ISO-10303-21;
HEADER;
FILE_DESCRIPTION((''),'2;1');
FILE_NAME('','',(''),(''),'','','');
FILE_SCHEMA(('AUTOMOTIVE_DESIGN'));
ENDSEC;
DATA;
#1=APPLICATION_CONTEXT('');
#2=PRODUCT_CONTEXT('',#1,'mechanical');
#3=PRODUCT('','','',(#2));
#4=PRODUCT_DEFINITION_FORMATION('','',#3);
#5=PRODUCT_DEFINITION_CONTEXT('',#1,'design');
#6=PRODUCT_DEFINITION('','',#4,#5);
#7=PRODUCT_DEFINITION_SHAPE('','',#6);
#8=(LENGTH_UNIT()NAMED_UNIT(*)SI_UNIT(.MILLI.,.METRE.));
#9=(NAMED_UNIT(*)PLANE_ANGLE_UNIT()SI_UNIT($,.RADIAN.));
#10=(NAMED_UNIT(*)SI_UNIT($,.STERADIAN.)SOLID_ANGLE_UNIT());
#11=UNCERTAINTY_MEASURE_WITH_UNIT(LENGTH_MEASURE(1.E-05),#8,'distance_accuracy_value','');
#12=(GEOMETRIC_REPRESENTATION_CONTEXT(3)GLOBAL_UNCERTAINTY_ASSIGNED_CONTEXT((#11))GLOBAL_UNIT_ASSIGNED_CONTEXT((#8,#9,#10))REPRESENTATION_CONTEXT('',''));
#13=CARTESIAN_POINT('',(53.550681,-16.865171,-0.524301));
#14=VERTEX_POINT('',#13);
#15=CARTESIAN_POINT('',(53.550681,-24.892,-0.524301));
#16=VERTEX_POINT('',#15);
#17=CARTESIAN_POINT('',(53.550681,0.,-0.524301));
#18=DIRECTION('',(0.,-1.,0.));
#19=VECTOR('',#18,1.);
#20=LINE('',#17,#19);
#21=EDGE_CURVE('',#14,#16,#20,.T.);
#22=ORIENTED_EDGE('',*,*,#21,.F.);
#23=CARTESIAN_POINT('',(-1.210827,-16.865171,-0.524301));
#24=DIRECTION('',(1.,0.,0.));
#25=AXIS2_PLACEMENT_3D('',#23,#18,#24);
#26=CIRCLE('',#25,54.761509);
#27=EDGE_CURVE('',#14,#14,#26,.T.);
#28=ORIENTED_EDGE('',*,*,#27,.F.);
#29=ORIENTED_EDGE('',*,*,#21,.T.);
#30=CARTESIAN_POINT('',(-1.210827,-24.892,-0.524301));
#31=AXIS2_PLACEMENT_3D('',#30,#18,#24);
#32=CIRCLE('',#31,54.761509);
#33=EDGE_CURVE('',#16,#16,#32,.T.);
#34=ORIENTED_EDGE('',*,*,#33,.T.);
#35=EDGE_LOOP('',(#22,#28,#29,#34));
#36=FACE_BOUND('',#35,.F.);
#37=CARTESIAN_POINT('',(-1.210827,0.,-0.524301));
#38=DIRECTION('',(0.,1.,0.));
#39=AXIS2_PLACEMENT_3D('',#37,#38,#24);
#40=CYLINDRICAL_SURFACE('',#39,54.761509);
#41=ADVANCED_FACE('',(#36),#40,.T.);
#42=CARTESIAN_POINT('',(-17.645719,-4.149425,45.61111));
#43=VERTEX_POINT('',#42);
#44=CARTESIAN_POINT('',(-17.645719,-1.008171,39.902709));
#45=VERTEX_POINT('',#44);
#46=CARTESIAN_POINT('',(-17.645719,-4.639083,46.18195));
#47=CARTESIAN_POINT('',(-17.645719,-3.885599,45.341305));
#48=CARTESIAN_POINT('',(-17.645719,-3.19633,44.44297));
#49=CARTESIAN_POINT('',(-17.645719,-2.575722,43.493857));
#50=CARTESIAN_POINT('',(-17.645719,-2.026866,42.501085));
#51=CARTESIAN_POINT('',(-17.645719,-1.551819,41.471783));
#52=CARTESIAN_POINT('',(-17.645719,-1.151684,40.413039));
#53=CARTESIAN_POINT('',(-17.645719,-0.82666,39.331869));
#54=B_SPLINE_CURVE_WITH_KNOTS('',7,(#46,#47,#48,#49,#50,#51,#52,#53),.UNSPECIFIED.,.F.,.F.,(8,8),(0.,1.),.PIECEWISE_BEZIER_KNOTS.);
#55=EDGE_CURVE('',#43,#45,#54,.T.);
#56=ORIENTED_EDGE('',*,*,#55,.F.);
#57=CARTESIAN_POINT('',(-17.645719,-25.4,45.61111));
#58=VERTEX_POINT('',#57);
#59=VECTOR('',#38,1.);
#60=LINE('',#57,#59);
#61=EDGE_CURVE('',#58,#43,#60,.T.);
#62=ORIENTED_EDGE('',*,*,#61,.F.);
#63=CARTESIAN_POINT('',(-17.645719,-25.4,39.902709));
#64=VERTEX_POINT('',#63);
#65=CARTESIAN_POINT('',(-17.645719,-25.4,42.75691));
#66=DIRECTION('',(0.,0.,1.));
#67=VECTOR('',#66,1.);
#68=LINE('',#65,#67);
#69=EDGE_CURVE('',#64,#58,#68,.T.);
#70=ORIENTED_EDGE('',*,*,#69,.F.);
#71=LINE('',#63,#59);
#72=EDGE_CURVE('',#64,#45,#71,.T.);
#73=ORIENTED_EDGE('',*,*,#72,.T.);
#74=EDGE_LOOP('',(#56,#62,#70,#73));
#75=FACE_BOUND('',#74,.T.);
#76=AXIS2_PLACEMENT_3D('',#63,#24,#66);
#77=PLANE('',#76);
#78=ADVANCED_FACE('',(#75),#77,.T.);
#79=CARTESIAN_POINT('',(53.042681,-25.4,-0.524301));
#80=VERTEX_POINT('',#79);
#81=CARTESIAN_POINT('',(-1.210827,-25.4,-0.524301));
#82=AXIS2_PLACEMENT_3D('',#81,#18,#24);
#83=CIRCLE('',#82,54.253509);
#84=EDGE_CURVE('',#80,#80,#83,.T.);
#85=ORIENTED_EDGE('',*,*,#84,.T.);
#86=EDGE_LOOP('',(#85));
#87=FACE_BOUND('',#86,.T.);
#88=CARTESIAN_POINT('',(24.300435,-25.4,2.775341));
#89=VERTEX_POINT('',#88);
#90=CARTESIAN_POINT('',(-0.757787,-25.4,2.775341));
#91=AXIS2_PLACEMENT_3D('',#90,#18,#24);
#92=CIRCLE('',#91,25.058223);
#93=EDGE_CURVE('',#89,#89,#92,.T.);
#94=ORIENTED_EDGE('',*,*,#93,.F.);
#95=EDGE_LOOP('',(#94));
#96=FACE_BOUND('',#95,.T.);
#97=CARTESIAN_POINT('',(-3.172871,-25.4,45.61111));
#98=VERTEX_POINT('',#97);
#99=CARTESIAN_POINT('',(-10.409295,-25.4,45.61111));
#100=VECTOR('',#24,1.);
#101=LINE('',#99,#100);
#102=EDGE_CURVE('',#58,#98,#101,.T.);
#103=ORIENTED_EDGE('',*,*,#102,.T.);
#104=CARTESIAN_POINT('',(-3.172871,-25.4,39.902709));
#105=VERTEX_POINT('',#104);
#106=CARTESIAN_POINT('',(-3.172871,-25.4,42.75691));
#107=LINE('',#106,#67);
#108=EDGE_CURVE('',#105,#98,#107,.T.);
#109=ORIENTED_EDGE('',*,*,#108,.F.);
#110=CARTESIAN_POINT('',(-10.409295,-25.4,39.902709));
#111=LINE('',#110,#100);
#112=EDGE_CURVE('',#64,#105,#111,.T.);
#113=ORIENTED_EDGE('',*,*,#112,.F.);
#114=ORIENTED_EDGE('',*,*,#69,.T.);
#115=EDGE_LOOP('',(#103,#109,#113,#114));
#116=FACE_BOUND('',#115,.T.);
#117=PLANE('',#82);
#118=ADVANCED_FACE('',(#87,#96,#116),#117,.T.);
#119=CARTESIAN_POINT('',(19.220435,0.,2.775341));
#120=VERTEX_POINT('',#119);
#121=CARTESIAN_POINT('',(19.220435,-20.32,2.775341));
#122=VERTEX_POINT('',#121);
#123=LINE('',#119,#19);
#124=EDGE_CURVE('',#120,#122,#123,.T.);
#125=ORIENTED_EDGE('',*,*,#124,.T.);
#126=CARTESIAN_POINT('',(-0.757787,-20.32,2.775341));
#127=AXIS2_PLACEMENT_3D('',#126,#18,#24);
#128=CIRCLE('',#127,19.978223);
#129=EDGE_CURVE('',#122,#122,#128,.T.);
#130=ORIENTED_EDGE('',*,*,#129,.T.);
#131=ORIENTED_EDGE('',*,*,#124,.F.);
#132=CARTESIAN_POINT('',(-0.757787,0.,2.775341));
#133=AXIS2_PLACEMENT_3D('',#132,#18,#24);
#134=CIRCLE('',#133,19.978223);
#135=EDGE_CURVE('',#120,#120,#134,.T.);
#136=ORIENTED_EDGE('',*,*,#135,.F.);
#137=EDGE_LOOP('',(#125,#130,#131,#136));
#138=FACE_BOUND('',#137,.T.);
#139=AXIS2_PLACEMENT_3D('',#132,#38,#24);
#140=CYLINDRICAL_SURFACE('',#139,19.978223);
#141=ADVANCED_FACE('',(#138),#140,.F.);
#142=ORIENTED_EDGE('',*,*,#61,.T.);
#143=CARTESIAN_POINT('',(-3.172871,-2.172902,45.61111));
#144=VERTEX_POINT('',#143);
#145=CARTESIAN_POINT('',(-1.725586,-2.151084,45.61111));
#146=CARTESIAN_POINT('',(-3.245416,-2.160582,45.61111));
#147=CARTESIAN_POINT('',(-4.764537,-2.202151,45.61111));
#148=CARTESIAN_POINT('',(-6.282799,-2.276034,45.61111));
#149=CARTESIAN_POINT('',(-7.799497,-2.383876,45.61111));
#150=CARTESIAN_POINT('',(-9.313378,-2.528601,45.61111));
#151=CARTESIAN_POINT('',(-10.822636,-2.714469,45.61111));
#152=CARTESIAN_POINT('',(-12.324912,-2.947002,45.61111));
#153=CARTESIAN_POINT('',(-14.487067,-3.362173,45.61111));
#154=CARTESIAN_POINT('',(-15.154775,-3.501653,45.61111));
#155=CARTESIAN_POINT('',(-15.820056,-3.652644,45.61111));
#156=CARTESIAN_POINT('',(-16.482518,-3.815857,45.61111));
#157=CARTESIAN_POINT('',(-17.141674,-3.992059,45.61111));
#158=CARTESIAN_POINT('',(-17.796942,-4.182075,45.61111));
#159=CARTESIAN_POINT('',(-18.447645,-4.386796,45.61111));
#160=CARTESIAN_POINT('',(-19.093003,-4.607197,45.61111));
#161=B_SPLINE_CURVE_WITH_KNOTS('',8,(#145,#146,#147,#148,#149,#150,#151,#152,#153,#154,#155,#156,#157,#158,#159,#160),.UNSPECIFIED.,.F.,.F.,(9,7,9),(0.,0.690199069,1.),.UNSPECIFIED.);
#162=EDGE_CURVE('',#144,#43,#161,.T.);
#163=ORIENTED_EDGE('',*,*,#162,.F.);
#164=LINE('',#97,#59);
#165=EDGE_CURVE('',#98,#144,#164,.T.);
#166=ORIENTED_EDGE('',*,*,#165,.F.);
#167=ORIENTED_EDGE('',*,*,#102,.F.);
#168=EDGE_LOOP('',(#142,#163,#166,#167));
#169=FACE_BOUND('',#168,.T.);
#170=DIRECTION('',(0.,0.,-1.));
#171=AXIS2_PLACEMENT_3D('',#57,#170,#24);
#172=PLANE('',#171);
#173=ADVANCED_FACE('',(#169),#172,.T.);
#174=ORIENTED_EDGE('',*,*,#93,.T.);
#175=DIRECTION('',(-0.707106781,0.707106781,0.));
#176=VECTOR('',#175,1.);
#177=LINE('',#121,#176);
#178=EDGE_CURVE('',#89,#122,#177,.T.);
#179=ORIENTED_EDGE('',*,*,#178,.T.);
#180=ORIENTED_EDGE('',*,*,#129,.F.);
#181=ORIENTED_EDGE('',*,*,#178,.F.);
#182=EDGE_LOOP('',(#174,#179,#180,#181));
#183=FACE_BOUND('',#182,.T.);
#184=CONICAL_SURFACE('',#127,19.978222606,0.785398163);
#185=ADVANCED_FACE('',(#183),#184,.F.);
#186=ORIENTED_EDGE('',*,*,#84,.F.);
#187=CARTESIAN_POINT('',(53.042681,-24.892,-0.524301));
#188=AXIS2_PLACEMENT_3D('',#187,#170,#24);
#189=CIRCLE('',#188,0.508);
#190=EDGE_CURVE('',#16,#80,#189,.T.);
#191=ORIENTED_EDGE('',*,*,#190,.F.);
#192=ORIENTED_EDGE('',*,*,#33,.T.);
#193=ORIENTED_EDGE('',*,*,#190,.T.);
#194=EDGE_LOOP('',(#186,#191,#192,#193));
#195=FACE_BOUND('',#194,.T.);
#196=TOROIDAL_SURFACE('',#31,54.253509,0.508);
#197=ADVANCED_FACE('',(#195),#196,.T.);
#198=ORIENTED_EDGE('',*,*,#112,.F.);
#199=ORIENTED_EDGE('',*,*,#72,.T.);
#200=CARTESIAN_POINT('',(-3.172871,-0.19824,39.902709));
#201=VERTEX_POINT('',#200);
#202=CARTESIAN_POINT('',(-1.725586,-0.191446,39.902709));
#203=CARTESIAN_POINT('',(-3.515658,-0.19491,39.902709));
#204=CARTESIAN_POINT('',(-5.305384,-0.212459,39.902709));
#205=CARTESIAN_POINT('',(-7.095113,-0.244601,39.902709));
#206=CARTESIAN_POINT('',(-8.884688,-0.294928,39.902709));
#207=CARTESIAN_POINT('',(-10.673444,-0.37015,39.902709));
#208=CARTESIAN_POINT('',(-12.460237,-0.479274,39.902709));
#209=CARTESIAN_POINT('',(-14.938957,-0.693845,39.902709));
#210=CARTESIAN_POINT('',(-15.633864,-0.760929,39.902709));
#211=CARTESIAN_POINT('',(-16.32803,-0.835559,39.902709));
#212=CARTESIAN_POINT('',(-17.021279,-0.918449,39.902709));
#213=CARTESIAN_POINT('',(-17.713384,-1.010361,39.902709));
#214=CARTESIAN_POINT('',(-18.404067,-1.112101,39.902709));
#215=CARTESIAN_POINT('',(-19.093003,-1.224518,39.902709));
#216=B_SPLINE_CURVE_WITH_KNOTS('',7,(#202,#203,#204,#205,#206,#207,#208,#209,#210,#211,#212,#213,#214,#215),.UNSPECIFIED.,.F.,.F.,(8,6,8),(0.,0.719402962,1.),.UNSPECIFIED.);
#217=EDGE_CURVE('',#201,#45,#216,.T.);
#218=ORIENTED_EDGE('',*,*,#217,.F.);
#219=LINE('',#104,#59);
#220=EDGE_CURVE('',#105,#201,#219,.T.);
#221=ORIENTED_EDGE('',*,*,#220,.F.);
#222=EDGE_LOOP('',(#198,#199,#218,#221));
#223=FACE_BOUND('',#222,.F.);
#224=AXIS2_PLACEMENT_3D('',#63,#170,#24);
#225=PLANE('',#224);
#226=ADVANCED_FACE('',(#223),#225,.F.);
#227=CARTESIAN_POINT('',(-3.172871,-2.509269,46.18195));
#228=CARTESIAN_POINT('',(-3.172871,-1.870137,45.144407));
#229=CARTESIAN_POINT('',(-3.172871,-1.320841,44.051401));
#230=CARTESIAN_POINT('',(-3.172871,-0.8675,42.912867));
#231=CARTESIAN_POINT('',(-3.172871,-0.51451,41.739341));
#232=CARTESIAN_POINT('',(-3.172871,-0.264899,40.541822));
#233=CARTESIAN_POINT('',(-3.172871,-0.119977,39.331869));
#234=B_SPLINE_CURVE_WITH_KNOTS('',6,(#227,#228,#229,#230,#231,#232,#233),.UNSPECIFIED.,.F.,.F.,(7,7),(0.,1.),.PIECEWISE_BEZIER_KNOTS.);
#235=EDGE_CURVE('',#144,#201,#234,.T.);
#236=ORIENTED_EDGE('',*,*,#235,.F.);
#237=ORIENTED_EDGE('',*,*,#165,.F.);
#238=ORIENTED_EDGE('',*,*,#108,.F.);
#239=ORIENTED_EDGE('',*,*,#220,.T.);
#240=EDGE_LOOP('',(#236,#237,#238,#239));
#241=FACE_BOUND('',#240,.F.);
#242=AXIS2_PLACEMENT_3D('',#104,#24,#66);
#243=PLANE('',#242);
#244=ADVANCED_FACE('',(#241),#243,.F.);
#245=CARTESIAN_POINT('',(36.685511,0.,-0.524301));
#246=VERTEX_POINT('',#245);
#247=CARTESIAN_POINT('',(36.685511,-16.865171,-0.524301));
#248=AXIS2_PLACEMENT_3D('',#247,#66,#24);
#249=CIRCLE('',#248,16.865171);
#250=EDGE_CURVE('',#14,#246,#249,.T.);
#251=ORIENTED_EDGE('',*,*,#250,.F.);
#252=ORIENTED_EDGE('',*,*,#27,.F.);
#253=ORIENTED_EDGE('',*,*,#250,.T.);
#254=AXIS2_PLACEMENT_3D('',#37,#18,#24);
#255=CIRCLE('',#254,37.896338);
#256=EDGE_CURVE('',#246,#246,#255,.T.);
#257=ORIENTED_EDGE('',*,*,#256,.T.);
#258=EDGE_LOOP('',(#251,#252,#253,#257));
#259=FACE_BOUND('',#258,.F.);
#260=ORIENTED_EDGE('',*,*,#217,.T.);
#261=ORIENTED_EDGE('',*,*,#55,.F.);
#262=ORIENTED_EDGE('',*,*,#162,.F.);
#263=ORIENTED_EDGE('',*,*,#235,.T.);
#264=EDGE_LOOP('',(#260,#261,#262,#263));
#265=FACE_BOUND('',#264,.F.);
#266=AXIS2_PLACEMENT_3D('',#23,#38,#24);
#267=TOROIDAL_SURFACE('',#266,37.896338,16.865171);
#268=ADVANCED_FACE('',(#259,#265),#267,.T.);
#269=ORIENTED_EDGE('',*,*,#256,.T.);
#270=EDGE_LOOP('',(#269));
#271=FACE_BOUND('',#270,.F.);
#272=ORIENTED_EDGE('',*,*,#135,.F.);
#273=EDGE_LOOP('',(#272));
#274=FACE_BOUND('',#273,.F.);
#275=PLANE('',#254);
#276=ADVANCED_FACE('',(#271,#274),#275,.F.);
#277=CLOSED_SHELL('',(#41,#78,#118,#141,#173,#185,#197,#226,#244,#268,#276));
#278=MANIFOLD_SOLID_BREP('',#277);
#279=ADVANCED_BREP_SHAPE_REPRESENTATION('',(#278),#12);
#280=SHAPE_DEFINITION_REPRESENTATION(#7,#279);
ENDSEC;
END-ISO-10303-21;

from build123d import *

# Parameters (mm, degrees)
F0_R     = 54.7615085619
F0_R_2   = 19.9782226064
F1_DEPTH = 25.4
F2_W     = 14.4728478044
F2_H     = 5.7084001601
F3_DEPTH = 25.4
F4_R     = 0.508
F5_SIZE  = 5.08


# Not quite as in the source:
# - a fillet or chamfer that OpenCascade refuses, or shapes differently, is made with other operations: its cross-section is extruded or revolved along the edge and cut away or added


with BuildPart() as f1:
    # F0 (on Front) → F1 (new body)
    with BuildSketch(Plane.XZ):
        with Locations((-1.2108273804, -0.5243010819)):
            Circle(F0_R)
        with Locations((-0.7577873766, 2.7753412724)):
            Circle(F0_R_2, mode=Mode.SUBTRACT)
    extrude(amount=F1_DEPTH)

    # F2 (on face) → F3 (cut)
    with BuildSketch(Plane.XZ.offset(25.4)):
        with Locations((-10.4092946276, 42.7569095045)):
            Rectangle(F2_W, F2_H)
    extrude(amount=-F3_DEPTH, mode=Mode.SUBTRACT)

    # F4
    f4_edges = [f1.edges().sort_by_distance(p)[0] for p in [
        (-55.972336, -25.4, -0.524301),
    ]]
    fillet(f4_edges, radius=F4_R)

    # F5
    f5_edges = [f1.edges().sort_by_distance(p)[0] for p in [
        (-20.73601, -25.4, 2.775341),
    ]]
    chamfer(f5_edges, length=F5_SIZE)

    # F6: fillet of radius 16.8651706448 on 1 edges, made by hand

    # F6_s1 → F6_t2 (revolve, cut)
    with BuildSketch(Plane.XY.offset(-0.5243010819)):
        with BuildLine():
            ThreePointArc((53.5506811815, -16.8651706448), (48.6109870655, -4.939694116), (36.6855105367, 0))
            Line((36.6855105367, 0), (53.5506811815, 0))
            Line((53.5506811815, 0), (53.5506811815, -16.8651706448))
        make_face()
    revolve(axis=Axis((-1.2108273804, 0, -0.5243010819), (0, -1, 0)), mode=Mode.SUBTRACT)


solid = f1.part
